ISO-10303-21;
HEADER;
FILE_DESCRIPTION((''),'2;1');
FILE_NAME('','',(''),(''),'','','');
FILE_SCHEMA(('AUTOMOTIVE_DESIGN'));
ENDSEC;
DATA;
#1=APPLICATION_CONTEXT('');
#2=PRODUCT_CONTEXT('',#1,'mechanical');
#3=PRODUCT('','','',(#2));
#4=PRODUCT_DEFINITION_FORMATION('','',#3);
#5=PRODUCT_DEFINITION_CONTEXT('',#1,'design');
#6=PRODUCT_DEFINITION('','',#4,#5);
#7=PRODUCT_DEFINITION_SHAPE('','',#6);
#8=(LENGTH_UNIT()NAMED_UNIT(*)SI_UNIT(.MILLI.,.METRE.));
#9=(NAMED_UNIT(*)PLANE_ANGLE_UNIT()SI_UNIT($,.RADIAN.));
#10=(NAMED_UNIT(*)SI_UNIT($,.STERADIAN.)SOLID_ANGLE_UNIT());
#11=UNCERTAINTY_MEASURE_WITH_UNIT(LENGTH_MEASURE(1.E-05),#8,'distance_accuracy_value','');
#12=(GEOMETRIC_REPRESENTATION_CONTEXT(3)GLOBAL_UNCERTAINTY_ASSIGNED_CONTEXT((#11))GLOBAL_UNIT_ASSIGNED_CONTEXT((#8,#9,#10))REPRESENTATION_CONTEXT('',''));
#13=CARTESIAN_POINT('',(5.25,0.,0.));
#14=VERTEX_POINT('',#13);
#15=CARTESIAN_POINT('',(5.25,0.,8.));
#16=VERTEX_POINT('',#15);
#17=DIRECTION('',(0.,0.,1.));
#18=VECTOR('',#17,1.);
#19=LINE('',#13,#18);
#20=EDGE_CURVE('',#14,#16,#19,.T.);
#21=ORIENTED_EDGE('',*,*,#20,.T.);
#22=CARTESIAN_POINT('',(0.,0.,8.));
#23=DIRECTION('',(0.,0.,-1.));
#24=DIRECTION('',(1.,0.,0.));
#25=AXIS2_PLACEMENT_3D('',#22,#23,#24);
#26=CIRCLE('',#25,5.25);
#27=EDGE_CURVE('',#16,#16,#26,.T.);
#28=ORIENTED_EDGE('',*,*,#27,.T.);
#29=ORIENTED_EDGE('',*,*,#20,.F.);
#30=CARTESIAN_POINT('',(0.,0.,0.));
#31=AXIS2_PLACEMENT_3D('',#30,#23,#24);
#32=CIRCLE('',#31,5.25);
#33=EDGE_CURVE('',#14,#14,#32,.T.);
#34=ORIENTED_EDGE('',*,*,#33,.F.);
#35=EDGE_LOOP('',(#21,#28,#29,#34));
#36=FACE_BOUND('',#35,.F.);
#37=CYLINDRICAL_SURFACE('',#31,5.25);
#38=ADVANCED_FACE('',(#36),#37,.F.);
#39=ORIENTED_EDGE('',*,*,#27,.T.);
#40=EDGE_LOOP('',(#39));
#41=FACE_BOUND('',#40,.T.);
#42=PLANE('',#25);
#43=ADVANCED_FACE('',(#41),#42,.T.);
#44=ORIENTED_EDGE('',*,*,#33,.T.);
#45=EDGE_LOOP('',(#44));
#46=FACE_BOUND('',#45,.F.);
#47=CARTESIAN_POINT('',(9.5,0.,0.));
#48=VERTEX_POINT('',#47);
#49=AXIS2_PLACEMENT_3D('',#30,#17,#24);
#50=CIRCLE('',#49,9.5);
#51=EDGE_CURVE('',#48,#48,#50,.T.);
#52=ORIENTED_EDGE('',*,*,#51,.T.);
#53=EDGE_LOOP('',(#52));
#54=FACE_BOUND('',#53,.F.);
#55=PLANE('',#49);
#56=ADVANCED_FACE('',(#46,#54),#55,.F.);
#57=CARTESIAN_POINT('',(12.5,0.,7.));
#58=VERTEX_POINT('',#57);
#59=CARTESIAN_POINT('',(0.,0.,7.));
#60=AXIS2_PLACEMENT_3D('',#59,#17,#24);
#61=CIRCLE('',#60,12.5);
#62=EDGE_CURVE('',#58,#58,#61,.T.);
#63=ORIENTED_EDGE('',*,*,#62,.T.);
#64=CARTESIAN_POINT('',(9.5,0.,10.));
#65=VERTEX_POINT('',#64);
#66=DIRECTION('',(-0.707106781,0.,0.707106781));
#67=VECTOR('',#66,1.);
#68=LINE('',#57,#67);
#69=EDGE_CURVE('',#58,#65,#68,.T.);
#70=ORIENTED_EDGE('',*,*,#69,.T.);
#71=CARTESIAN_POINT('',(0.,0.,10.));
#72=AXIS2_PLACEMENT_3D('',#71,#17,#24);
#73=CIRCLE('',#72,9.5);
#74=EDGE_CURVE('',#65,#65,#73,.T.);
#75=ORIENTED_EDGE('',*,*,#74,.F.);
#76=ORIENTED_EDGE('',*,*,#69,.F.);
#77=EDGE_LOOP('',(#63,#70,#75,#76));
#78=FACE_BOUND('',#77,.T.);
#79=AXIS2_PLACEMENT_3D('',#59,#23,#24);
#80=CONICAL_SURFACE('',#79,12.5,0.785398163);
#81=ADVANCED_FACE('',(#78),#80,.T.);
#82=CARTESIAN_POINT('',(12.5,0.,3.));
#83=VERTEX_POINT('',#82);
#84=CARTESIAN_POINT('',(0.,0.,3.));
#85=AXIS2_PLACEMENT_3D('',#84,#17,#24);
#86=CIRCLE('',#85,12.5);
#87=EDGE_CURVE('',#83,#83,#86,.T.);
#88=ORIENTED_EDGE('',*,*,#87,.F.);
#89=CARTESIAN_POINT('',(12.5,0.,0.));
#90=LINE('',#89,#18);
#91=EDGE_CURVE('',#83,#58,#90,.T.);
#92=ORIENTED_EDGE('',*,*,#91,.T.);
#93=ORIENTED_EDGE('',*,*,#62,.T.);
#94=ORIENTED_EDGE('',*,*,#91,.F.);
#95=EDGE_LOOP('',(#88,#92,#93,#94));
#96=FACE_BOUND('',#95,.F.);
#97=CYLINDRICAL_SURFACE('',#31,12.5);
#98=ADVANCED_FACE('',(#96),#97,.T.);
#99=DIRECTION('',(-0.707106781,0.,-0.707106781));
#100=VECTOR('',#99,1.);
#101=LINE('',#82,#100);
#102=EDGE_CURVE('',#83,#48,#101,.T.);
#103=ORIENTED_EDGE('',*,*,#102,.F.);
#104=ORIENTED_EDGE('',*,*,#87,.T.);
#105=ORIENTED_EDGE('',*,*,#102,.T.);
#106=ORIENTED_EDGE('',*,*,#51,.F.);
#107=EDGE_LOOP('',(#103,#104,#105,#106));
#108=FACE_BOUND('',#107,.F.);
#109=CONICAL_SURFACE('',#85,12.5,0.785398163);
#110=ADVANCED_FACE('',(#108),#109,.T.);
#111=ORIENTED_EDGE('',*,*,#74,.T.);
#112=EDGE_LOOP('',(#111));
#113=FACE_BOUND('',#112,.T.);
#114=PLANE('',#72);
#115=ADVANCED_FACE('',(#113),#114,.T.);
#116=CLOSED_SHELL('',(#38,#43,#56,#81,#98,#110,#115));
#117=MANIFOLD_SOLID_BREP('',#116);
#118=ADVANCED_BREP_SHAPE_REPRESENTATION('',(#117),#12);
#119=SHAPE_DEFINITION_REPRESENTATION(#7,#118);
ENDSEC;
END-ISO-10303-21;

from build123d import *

# Parameters (mm, degrees)
F0_R     = 12.5
F1_DEPTH = 10
F2_SIZE  = 3
F3_R     = 5.25
F4_DEPTH = 8


# Not quite as in the source:
# - a feature names something its author has since deleted; it is built from what else it names


with BuildPart() as f1:
    # F0 (on Top) → F1 (new body)
    with BuildSketch(Plane.XY):
        Circle(F0_R)
    extrude(amount=F1_DEPTH)

    # F2
    f2_edges = [f1.edges().sort_by_distance(p)[0] for p in [
        (-12.5, 0, 10),
        (12.5, 0, 5),
        (-12.5, 0, 0),
    ]]
    chamfer(f2_edges, length=F2_SIZE)

    # F3 (on face) → F4 (cut)
    with BuildSketch(Plane(origin=(0, 0, 0), x_dir=(1, 0, 0), z_dir=(0, 0, -1))):
        Circle(F3_R)
    extrude(amount=-F4_DEPTH, mode=Mode.SUBTRACT)


solid = f1.part
